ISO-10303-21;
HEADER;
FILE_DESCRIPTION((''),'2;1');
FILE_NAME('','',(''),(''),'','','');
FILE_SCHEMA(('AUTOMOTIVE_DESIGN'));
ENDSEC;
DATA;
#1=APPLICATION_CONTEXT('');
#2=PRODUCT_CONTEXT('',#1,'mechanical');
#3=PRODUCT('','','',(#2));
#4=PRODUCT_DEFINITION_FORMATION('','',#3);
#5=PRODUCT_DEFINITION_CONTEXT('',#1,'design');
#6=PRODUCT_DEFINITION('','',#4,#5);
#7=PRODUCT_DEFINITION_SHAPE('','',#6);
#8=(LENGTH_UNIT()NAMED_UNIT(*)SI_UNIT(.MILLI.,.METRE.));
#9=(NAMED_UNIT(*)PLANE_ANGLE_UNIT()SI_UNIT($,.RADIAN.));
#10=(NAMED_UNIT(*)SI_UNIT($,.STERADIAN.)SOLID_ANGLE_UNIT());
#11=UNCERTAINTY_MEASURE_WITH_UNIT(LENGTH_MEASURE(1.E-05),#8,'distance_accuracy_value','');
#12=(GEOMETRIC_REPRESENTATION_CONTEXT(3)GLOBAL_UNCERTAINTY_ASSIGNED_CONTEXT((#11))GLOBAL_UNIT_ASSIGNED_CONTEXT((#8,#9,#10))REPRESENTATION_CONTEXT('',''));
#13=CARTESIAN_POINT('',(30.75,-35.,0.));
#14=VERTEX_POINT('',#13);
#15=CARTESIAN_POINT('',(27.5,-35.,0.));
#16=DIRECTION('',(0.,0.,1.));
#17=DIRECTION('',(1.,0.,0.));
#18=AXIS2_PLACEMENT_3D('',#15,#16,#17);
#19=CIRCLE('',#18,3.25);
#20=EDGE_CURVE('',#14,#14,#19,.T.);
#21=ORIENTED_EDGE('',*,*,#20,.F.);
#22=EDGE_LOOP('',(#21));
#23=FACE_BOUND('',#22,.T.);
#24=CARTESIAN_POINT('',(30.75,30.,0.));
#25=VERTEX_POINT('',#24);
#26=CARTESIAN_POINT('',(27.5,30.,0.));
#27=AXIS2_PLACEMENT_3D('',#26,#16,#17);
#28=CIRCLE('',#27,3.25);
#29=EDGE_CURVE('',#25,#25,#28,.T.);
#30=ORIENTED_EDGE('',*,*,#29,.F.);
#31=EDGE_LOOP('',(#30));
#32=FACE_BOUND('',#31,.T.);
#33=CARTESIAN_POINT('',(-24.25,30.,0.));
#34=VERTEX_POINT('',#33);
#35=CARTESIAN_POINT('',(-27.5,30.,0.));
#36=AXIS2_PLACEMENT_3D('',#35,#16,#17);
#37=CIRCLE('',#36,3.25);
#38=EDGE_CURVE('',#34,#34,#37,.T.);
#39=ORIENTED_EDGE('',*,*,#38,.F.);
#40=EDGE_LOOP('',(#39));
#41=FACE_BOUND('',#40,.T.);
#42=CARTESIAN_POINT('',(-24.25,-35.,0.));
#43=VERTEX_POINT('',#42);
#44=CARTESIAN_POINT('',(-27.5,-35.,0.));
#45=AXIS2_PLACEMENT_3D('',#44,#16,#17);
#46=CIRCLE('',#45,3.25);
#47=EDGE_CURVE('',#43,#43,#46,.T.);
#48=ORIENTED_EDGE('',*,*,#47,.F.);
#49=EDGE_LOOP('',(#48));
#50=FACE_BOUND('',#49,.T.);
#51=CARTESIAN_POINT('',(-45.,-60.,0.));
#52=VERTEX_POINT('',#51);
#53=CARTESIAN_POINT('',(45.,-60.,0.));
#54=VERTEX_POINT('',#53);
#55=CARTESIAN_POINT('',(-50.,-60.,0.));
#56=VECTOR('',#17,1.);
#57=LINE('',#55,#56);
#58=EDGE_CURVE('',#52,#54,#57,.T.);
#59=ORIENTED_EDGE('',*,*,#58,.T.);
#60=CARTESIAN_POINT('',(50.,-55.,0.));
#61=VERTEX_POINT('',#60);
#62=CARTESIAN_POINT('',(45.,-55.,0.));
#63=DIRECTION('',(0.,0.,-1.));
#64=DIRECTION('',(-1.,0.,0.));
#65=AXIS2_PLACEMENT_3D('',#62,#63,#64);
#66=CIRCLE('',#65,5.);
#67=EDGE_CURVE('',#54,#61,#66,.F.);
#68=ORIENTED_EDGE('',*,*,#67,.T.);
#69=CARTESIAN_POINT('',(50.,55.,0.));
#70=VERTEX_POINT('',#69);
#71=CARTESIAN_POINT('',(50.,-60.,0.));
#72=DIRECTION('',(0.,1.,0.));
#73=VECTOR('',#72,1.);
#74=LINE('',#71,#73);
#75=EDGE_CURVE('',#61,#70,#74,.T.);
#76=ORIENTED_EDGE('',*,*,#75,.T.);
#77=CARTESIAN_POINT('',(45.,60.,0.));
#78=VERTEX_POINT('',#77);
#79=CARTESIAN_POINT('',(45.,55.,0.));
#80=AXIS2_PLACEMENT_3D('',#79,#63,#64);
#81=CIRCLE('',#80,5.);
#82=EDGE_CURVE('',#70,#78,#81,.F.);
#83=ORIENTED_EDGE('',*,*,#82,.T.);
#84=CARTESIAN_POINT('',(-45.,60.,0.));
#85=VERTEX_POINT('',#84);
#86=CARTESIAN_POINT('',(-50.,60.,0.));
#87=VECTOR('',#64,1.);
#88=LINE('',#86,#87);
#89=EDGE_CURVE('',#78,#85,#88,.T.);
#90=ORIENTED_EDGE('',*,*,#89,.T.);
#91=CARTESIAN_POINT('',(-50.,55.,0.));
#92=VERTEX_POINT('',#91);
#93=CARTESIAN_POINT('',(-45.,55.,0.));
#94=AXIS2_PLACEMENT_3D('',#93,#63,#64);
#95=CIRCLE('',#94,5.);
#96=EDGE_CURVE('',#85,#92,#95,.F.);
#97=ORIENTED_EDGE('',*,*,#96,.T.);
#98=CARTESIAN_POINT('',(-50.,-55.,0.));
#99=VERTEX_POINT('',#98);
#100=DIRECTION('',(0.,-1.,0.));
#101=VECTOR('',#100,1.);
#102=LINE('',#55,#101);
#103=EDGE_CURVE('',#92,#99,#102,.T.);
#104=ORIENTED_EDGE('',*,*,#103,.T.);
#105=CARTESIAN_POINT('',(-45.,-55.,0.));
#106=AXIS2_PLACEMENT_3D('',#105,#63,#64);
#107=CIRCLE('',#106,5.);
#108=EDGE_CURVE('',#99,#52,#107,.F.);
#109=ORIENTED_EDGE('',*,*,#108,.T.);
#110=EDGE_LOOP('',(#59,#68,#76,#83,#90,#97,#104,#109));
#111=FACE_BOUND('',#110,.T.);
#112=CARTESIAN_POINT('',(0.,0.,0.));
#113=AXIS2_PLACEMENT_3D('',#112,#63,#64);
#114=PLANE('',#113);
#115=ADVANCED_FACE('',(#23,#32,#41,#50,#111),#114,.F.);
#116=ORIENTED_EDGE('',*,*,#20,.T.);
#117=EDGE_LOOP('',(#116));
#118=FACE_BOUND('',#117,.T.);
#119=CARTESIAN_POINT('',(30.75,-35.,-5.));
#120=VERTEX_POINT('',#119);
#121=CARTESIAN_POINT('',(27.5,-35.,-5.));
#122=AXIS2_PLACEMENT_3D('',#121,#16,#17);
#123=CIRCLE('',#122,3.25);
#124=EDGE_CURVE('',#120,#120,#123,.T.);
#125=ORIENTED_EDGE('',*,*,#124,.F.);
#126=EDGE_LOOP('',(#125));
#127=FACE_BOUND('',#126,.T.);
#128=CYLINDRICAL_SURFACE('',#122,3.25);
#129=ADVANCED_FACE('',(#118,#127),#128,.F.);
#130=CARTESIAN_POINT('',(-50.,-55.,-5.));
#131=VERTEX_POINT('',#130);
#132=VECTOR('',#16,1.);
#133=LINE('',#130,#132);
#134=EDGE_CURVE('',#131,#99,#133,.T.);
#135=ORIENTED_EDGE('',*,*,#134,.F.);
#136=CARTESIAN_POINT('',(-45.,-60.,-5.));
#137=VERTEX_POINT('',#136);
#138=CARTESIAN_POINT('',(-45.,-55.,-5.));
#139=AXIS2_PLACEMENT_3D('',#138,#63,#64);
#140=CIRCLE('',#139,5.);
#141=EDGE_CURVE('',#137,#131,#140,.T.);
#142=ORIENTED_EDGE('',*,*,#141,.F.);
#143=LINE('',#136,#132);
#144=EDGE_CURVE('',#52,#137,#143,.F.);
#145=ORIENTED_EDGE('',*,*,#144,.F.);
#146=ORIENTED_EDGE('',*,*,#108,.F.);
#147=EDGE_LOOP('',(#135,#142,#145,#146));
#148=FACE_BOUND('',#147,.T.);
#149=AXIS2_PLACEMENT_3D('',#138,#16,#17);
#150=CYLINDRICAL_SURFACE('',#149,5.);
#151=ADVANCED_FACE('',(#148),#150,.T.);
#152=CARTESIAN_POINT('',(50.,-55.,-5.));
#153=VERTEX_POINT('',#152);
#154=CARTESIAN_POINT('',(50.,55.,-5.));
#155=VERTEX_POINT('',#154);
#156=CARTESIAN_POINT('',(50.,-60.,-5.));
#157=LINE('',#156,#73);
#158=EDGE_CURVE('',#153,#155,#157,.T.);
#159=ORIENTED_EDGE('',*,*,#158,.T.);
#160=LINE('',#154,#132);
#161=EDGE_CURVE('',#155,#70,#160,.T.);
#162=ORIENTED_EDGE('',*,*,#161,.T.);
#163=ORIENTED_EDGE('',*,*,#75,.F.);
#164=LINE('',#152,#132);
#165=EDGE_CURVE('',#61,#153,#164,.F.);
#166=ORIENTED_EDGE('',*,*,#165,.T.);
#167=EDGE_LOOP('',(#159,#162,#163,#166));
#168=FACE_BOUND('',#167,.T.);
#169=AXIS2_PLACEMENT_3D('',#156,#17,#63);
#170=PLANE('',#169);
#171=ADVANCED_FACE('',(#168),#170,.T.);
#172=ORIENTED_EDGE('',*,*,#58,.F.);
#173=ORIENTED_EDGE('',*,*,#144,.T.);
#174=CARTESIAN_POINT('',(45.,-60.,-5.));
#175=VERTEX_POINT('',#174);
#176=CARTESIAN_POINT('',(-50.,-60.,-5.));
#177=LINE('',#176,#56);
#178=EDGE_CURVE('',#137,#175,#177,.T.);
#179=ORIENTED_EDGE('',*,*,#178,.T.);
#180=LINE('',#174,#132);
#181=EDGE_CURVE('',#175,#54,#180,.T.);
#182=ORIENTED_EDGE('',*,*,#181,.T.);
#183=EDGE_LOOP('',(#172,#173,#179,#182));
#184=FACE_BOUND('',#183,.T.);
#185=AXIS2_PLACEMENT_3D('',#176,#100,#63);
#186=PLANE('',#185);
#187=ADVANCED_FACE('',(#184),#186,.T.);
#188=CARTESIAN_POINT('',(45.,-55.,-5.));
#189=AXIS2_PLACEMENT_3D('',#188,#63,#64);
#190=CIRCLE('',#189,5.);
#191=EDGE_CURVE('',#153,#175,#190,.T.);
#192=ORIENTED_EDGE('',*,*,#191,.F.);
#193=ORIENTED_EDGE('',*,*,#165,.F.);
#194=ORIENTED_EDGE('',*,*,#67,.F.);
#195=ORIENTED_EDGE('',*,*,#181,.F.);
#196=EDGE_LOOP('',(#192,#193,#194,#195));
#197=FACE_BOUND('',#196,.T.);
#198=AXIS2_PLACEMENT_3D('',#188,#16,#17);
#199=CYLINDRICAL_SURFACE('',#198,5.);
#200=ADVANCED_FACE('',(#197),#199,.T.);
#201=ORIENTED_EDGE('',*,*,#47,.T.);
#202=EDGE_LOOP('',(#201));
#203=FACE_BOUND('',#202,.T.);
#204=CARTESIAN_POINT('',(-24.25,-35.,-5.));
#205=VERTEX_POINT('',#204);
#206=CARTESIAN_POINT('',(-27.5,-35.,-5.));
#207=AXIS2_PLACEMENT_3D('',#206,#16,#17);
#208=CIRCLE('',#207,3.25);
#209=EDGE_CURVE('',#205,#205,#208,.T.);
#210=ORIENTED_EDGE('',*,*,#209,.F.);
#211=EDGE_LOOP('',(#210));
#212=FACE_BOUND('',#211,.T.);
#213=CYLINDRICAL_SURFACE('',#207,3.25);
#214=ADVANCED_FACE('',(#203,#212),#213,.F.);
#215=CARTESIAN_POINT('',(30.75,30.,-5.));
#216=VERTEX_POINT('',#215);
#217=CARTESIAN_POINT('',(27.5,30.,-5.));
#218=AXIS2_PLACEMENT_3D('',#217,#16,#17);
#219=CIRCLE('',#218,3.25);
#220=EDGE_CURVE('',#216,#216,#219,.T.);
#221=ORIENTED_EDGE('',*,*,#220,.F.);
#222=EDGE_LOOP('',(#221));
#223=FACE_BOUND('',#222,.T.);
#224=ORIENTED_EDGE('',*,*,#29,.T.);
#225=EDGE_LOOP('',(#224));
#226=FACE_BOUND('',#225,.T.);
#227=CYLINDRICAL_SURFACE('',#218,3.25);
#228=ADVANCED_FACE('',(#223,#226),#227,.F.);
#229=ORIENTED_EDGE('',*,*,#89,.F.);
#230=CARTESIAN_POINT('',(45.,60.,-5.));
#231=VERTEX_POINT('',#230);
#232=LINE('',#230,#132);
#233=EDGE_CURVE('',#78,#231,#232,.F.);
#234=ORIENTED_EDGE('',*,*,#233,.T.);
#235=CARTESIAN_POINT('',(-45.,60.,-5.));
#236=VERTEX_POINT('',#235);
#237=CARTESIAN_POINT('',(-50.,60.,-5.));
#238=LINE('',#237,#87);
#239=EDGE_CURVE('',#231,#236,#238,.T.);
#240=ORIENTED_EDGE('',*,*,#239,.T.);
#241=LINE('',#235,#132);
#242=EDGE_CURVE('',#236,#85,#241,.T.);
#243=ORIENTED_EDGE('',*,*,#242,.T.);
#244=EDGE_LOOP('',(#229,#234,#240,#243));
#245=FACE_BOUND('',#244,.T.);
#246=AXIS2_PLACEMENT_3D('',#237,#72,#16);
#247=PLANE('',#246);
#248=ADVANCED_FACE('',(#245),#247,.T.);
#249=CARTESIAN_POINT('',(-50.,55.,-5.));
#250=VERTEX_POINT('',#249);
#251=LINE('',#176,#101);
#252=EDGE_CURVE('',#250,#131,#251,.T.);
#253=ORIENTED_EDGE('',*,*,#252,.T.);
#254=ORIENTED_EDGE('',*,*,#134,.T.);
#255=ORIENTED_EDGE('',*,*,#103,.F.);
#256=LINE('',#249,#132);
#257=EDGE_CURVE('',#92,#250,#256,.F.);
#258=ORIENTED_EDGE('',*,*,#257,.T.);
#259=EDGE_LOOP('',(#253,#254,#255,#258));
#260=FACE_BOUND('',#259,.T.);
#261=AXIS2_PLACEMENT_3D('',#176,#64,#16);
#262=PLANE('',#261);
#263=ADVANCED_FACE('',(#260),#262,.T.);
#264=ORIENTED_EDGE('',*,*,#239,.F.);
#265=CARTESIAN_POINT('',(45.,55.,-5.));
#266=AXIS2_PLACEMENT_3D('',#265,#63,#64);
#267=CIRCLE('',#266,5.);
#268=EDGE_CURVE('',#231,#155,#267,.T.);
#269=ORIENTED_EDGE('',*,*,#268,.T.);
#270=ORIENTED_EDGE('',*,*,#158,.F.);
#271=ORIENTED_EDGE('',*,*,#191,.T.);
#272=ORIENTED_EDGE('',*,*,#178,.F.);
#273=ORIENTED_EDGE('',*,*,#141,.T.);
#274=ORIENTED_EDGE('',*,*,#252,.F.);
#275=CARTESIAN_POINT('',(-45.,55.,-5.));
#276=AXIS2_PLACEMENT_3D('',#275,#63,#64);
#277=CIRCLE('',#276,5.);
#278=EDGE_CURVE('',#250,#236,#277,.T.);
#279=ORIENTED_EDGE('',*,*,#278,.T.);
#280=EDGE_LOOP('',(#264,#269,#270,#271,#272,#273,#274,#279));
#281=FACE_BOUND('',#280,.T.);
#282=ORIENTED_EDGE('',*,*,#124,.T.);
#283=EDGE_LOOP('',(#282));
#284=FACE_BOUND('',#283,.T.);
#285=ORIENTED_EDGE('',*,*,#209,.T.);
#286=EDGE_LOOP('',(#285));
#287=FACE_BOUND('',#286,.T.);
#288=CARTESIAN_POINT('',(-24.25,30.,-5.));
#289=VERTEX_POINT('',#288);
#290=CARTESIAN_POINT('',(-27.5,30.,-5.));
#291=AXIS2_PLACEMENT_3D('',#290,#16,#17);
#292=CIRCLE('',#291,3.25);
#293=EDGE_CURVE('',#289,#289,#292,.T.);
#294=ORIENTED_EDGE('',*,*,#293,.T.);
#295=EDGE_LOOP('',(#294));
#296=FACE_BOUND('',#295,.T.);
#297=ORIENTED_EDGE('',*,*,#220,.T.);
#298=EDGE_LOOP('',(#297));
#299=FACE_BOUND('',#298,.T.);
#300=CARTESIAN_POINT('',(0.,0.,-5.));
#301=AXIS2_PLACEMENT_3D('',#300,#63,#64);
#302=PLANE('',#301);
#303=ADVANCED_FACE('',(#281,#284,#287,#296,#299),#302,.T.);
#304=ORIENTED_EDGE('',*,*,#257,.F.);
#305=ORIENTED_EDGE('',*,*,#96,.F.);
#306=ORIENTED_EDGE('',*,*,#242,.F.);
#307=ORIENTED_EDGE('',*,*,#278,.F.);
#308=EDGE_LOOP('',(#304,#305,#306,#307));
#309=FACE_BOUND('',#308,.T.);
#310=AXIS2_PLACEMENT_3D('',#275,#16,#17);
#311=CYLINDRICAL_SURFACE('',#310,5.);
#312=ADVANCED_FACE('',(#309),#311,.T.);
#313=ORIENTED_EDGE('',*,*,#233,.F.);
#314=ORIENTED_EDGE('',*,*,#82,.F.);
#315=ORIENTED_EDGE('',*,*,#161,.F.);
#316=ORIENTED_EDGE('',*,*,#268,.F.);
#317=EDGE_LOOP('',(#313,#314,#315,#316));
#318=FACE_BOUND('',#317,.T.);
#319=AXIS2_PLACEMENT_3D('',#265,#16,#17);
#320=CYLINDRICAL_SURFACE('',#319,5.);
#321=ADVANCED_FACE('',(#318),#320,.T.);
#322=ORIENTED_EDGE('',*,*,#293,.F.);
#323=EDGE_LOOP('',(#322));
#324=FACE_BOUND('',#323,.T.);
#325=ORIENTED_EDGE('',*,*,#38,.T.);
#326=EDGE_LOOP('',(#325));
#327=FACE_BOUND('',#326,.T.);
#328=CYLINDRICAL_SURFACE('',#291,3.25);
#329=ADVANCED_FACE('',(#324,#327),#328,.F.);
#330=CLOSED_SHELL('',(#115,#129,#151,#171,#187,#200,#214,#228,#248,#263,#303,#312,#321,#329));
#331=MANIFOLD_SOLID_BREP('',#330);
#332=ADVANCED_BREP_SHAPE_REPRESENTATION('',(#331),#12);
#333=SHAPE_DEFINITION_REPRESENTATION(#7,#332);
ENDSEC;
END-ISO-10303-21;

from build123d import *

# Parameters (mm, degrees)
SKETCH1_W          = 100
SKETCH1_H          = 120
SKETCH1_R          = 3.25
BASE_FLANGE1_DEPTH = 5
FILLET1_R          = 5


# Sheet-metal steps are written as plain solids
with BuildPart() as part:
    # Sketch1 → Base-Flange1 (new body)
    with BuildSketch(Plane.XY):
        Rectangle(SKETCH1_W, SKETCH1_H)
        with Locations((-27.5, 30)):
            Circle(SKETCH1_R, mode=Mode.SUBTRACT)
        with Locations((27.5, 30)):
            Circle(SKETCH1_R, mode=Mode.SUBTRACT)
        with Locations((-27.5, -35)):
            Circle(SKETCH1_R, mode=Mode.SUBTRACT)
        with Locations((27.5, -35)):
            Circle(SKETCH1_R, mode=Mode.SUBTRACT)
    extrude(amount=-BASE_FLANGE1_DEPTH)

    # Fillet1
    fillet1_edges = [part.edges().sort_by_distance(p)[0] for p in [
        (50, -60, -2.5),
        (-50, -60, -2.5),
        (-50, 60, -2.5),
        (50, 60, -2.5),
    ]]
    fillet(fillet1_edges, radius=FILLET1_R)


solid = part.part
